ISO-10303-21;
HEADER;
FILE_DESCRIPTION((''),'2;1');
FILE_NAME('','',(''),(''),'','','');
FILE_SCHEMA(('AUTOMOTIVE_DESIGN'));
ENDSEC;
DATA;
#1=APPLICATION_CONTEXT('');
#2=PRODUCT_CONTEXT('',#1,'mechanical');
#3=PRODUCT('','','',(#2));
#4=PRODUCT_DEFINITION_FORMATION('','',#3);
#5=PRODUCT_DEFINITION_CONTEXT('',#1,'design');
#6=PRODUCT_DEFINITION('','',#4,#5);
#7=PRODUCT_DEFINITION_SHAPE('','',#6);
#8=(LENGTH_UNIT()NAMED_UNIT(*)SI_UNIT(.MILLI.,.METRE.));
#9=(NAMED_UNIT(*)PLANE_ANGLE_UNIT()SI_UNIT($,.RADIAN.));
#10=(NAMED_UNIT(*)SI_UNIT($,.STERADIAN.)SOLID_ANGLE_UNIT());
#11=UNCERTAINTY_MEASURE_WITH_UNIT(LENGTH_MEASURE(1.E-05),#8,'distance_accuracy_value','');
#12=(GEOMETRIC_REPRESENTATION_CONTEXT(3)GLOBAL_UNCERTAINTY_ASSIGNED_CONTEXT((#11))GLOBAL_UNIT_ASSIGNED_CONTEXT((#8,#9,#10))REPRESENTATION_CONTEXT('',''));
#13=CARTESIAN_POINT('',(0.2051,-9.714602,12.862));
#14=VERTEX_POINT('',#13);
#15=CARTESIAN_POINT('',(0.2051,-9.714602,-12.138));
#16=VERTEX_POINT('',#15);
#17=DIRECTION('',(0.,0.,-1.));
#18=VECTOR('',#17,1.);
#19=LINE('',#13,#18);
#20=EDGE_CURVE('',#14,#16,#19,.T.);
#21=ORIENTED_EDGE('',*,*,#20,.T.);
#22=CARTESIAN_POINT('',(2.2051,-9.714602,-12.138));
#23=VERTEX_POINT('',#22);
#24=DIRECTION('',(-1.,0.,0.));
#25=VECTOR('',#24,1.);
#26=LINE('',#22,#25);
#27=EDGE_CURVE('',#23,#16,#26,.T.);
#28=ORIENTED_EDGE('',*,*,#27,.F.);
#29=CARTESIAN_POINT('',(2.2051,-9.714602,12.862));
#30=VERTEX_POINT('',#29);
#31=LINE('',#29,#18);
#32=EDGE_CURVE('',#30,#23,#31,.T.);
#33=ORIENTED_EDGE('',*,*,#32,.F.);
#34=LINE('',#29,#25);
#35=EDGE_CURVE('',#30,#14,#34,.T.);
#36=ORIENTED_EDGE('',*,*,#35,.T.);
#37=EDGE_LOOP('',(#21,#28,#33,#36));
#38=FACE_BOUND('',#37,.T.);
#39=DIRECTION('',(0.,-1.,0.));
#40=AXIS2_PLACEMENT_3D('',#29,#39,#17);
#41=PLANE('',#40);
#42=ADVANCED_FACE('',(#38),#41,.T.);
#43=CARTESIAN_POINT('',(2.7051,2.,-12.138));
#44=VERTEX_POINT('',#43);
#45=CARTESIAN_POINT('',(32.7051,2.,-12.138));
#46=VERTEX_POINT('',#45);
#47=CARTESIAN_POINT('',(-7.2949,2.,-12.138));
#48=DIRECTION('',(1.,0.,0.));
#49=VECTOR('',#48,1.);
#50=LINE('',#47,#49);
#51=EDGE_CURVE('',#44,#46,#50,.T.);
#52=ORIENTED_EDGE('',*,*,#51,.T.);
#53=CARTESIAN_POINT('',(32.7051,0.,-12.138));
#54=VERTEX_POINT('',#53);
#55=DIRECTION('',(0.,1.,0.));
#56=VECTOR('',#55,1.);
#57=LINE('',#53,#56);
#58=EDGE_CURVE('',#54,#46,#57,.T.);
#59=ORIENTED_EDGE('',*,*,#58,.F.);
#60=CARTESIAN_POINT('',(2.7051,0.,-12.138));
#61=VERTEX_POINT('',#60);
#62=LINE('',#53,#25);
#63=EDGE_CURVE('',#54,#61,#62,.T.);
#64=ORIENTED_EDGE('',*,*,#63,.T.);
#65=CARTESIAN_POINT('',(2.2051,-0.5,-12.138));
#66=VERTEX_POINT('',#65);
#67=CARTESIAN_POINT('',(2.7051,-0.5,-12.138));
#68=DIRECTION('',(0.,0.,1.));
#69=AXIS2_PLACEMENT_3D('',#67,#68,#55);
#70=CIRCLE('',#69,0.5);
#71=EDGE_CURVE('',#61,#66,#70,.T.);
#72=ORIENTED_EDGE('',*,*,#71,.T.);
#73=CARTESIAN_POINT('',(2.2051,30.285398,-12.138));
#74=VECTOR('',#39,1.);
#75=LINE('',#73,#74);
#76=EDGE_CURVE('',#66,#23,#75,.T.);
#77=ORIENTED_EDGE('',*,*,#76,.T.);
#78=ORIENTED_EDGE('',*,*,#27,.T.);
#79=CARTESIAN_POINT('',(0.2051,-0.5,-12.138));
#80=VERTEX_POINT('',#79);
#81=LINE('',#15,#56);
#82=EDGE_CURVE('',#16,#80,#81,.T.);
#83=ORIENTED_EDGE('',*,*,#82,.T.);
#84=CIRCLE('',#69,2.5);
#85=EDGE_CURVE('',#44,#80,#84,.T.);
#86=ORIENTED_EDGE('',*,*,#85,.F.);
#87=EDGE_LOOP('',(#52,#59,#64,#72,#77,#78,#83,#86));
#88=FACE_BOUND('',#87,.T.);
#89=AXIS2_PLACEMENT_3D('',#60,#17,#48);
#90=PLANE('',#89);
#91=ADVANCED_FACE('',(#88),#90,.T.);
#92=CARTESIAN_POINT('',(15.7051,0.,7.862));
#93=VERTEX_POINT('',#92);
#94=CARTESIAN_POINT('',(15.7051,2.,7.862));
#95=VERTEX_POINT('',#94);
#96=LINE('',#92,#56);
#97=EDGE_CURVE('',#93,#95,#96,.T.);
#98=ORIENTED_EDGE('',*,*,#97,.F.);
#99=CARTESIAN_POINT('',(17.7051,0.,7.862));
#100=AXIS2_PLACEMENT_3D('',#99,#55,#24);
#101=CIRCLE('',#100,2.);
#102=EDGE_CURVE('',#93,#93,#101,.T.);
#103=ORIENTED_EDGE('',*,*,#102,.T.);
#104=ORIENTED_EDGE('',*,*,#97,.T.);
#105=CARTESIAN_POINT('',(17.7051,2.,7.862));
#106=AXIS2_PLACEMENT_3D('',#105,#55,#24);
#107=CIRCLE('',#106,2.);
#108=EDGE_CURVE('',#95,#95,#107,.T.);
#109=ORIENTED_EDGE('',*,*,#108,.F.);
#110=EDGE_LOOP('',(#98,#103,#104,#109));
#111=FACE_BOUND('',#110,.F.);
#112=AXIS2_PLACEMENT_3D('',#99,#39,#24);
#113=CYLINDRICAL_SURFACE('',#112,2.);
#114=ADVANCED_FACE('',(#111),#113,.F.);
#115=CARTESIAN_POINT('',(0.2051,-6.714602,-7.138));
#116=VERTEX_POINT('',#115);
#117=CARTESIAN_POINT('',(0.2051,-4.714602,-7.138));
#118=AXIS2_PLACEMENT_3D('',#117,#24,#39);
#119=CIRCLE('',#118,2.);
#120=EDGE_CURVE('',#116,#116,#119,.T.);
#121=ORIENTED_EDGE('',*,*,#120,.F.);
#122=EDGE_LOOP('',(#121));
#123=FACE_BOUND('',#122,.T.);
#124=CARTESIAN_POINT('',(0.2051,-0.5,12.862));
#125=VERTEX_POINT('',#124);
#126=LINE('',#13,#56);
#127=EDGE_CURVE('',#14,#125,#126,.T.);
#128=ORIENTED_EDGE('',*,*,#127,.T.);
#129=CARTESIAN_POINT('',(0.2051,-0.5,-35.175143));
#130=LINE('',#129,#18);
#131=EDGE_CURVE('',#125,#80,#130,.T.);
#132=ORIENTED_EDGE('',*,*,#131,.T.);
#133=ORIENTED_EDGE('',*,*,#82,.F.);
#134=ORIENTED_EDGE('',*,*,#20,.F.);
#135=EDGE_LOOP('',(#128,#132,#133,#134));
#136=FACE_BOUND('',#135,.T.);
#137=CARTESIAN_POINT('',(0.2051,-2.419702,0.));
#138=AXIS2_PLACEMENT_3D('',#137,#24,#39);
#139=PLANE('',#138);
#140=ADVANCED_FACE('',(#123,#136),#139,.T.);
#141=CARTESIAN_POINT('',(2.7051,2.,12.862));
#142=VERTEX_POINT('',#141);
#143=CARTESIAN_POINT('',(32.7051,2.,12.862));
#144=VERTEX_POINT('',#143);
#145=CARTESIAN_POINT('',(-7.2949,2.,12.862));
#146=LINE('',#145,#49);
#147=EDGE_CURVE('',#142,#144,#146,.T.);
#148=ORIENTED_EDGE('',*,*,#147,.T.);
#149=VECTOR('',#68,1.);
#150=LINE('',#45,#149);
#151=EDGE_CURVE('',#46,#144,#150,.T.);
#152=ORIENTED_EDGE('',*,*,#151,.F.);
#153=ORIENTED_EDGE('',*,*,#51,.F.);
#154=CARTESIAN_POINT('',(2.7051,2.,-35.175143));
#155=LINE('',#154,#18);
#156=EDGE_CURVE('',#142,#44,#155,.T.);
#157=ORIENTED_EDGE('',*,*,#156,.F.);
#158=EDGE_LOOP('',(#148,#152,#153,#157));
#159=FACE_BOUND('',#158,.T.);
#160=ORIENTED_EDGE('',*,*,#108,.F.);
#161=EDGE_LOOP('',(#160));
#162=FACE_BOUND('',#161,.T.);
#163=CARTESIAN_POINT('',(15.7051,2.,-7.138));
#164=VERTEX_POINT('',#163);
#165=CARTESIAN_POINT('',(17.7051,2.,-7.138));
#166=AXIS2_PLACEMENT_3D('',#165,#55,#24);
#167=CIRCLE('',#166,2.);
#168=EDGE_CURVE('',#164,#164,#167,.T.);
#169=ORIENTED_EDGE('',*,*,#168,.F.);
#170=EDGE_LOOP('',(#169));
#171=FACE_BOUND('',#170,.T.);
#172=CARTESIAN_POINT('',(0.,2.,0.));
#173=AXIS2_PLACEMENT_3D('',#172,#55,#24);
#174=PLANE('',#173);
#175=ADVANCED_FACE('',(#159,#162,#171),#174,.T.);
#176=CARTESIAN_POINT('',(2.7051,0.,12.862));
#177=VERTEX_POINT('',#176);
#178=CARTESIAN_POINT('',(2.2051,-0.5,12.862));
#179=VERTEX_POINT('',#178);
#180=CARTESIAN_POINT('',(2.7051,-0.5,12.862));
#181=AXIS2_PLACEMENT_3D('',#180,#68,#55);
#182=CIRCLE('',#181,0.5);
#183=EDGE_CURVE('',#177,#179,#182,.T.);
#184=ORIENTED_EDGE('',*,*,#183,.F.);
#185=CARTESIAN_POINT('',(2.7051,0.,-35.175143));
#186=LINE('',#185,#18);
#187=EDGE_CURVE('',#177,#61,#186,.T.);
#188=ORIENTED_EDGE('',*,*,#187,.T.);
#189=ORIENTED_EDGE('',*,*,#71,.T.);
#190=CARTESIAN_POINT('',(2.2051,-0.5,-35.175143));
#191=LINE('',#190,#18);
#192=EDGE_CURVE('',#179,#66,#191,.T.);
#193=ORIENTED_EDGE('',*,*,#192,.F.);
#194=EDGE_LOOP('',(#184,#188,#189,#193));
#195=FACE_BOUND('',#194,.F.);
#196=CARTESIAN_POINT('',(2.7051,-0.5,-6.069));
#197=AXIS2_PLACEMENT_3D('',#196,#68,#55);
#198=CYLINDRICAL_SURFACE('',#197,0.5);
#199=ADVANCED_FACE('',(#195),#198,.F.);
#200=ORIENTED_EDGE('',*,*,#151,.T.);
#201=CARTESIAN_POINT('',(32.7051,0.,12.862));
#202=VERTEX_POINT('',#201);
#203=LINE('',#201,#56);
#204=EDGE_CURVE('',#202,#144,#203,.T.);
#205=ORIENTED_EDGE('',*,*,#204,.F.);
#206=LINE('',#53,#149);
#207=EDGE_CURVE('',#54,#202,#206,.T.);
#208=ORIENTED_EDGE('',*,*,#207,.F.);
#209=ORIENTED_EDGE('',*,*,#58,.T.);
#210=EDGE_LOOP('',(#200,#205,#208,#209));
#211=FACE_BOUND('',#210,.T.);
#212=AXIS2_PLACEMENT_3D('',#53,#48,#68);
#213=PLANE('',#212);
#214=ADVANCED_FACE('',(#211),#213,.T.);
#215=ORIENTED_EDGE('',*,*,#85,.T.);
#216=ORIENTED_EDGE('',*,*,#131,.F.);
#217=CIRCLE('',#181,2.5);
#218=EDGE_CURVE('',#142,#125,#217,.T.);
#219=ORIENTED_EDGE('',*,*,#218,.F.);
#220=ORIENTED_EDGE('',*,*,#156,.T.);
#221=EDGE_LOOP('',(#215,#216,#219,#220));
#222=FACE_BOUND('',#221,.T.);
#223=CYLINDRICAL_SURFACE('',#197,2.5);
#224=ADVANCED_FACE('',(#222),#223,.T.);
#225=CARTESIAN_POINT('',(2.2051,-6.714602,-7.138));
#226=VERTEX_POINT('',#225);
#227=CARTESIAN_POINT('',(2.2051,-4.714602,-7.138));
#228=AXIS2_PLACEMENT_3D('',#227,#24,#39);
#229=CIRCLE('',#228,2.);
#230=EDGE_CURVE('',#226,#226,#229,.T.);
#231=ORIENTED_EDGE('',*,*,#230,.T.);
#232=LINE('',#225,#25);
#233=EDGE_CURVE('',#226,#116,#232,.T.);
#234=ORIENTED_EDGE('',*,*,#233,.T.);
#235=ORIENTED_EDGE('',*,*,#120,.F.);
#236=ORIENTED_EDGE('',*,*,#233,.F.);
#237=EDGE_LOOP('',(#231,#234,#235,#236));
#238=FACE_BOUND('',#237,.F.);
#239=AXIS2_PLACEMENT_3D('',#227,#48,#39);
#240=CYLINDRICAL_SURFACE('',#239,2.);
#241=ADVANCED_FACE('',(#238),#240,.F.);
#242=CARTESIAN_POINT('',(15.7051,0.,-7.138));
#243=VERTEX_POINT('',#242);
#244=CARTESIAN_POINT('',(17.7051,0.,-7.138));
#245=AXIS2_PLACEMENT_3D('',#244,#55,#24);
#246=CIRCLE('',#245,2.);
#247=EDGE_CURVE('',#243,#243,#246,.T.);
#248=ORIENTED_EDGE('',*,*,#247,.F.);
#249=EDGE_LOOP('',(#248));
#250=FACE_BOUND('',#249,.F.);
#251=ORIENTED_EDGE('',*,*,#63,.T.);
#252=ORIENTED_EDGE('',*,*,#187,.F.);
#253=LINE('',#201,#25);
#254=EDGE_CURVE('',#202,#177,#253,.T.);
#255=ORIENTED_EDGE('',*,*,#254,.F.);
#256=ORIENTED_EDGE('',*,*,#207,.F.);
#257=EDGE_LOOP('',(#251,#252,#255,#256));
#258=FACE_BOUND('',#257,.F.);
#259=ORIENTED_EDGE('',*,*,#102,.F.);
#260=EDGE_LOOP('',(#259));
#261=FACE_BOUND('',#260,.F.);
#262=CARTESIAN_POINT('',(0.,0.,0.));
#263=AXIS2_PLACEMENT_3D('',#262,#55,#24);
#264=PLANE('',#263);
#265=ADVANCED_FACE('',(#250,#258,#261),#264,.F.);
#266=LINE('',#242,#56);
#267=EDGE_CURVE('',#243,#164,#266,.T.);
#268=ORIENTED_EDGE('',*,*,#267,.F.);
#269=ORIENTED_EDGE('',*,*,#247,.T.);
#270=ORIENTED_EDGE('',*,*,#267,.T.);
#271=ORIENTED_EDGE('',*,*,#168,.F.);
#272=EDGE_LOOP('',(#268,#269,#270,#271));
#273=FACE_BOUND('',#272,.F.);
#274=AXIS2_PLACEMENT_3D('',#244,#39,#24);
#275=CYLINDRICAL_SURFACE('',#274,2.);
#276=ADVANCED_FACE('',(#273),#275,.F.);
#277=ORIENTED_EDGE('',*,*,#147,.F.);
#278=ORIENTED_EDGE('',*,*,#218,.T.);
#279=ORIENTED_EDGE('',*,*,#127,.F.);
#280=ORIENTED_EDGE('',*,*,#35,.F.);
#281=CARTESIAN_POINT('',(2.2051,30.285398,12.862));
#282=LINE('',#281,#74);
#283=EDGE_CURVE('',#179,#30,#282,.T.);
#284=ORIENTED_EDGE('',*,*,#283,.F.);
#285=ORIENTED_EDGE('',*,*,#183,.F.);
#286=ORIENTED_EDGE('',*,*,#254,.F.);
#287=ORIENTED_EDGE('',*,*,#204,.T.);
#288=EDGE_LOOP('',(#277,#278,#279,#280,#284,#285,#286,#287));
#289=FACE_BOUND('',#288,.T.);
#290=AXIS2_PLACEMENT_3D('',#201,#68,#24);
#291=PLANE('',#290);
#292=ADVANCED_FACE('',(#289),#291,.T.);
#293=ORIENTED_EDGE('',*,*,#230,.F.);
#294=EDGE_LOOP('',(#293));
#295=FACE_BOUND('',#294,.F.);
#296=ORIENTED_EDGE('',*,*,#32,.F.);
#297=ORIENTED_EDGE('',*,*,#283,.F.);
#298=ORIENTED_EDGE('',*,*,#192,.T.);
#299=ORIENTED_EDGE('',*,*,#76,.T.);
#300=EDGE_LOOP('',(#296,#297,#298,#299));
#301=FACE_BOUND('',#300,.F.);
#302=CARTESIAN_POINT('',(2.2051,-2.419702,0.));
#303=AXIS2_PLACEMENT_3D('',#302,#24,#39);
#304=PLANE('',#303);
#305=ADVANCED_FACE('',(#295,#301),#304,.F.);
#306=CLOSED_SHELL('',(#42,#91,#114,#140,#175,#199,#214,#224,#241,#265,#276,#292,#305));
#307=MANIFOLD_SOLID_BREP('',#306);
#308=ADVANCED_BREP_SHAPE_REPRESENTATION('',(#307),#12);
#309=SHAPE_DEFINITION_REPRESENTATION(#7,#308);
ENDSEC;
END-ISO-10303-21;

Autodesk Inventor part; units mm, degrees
ref_plane "YZ Plane" through (0, 0, 0) normal (1, 0, 0) x (0, 1, 0)
ref_plane "XZ Plane" through (0, 0, 0) normal (0, 1, 0) x (-1, 0, 0)
ref_plane "XY Plane" through (0, 0, 0) normal (0, 0, 1) x (1, 0, 0)
sketch "Boceto1" plane through (0, 0, 0) normal (0, 1, 0) x (-1, 0, 0)
  line L0 (7.2949, 12.862) -> (7.2949, -12.138)
  line L1 (7.2949, -12.138) -> (-32.7051, -12.138)
  line L2 (-32.7051, -12.138) -> (-32.7051, 12.862)
  line L3 (-32.7051, 12.862) -> (7.2949, 12.862)
  line L4 (-2.7051, -12.138) -> (-2.7051, 12.862)
  circle A0 centre (-17.7051, -7.138) radius 2
  circle A1 centre (-17.7051, 7.862) radius 2
  line L5 (7.2949, -12.138) -> (2.2949, -12.138)
  circle A2 centre (2.2949, -7.138) radius 2
  point P0 (0, 0)
  dimension "d0" = 25
  dimension "d1" = 40
  dimension "d11" = 4
  dimension "d12" = 4
  dimension "d13" = 5
  dimension "d14" = 5
  dimension "d15" = 15
  dimension "d16" = 15
  dimension "d18" = 4
  dimension "d19" = 5
  dimension "d20" = 5
extrude "Extrusión2" add sketch "Boceto1" along normal blind 2 contours L4 L1 L2 L3
extrude "Extrusión3" add sketch "Boceto1" along normal blind 2 contours L0 L1 L4 L3
bend part "Pieza de plegado1" radius 0.5 angle 90 line through (2.7051, 0, -12.138) along (0, 0, 1) centre toward (0, -1, 0) moving side (-1, 0, 0) both sides no
properties part number "leche"
